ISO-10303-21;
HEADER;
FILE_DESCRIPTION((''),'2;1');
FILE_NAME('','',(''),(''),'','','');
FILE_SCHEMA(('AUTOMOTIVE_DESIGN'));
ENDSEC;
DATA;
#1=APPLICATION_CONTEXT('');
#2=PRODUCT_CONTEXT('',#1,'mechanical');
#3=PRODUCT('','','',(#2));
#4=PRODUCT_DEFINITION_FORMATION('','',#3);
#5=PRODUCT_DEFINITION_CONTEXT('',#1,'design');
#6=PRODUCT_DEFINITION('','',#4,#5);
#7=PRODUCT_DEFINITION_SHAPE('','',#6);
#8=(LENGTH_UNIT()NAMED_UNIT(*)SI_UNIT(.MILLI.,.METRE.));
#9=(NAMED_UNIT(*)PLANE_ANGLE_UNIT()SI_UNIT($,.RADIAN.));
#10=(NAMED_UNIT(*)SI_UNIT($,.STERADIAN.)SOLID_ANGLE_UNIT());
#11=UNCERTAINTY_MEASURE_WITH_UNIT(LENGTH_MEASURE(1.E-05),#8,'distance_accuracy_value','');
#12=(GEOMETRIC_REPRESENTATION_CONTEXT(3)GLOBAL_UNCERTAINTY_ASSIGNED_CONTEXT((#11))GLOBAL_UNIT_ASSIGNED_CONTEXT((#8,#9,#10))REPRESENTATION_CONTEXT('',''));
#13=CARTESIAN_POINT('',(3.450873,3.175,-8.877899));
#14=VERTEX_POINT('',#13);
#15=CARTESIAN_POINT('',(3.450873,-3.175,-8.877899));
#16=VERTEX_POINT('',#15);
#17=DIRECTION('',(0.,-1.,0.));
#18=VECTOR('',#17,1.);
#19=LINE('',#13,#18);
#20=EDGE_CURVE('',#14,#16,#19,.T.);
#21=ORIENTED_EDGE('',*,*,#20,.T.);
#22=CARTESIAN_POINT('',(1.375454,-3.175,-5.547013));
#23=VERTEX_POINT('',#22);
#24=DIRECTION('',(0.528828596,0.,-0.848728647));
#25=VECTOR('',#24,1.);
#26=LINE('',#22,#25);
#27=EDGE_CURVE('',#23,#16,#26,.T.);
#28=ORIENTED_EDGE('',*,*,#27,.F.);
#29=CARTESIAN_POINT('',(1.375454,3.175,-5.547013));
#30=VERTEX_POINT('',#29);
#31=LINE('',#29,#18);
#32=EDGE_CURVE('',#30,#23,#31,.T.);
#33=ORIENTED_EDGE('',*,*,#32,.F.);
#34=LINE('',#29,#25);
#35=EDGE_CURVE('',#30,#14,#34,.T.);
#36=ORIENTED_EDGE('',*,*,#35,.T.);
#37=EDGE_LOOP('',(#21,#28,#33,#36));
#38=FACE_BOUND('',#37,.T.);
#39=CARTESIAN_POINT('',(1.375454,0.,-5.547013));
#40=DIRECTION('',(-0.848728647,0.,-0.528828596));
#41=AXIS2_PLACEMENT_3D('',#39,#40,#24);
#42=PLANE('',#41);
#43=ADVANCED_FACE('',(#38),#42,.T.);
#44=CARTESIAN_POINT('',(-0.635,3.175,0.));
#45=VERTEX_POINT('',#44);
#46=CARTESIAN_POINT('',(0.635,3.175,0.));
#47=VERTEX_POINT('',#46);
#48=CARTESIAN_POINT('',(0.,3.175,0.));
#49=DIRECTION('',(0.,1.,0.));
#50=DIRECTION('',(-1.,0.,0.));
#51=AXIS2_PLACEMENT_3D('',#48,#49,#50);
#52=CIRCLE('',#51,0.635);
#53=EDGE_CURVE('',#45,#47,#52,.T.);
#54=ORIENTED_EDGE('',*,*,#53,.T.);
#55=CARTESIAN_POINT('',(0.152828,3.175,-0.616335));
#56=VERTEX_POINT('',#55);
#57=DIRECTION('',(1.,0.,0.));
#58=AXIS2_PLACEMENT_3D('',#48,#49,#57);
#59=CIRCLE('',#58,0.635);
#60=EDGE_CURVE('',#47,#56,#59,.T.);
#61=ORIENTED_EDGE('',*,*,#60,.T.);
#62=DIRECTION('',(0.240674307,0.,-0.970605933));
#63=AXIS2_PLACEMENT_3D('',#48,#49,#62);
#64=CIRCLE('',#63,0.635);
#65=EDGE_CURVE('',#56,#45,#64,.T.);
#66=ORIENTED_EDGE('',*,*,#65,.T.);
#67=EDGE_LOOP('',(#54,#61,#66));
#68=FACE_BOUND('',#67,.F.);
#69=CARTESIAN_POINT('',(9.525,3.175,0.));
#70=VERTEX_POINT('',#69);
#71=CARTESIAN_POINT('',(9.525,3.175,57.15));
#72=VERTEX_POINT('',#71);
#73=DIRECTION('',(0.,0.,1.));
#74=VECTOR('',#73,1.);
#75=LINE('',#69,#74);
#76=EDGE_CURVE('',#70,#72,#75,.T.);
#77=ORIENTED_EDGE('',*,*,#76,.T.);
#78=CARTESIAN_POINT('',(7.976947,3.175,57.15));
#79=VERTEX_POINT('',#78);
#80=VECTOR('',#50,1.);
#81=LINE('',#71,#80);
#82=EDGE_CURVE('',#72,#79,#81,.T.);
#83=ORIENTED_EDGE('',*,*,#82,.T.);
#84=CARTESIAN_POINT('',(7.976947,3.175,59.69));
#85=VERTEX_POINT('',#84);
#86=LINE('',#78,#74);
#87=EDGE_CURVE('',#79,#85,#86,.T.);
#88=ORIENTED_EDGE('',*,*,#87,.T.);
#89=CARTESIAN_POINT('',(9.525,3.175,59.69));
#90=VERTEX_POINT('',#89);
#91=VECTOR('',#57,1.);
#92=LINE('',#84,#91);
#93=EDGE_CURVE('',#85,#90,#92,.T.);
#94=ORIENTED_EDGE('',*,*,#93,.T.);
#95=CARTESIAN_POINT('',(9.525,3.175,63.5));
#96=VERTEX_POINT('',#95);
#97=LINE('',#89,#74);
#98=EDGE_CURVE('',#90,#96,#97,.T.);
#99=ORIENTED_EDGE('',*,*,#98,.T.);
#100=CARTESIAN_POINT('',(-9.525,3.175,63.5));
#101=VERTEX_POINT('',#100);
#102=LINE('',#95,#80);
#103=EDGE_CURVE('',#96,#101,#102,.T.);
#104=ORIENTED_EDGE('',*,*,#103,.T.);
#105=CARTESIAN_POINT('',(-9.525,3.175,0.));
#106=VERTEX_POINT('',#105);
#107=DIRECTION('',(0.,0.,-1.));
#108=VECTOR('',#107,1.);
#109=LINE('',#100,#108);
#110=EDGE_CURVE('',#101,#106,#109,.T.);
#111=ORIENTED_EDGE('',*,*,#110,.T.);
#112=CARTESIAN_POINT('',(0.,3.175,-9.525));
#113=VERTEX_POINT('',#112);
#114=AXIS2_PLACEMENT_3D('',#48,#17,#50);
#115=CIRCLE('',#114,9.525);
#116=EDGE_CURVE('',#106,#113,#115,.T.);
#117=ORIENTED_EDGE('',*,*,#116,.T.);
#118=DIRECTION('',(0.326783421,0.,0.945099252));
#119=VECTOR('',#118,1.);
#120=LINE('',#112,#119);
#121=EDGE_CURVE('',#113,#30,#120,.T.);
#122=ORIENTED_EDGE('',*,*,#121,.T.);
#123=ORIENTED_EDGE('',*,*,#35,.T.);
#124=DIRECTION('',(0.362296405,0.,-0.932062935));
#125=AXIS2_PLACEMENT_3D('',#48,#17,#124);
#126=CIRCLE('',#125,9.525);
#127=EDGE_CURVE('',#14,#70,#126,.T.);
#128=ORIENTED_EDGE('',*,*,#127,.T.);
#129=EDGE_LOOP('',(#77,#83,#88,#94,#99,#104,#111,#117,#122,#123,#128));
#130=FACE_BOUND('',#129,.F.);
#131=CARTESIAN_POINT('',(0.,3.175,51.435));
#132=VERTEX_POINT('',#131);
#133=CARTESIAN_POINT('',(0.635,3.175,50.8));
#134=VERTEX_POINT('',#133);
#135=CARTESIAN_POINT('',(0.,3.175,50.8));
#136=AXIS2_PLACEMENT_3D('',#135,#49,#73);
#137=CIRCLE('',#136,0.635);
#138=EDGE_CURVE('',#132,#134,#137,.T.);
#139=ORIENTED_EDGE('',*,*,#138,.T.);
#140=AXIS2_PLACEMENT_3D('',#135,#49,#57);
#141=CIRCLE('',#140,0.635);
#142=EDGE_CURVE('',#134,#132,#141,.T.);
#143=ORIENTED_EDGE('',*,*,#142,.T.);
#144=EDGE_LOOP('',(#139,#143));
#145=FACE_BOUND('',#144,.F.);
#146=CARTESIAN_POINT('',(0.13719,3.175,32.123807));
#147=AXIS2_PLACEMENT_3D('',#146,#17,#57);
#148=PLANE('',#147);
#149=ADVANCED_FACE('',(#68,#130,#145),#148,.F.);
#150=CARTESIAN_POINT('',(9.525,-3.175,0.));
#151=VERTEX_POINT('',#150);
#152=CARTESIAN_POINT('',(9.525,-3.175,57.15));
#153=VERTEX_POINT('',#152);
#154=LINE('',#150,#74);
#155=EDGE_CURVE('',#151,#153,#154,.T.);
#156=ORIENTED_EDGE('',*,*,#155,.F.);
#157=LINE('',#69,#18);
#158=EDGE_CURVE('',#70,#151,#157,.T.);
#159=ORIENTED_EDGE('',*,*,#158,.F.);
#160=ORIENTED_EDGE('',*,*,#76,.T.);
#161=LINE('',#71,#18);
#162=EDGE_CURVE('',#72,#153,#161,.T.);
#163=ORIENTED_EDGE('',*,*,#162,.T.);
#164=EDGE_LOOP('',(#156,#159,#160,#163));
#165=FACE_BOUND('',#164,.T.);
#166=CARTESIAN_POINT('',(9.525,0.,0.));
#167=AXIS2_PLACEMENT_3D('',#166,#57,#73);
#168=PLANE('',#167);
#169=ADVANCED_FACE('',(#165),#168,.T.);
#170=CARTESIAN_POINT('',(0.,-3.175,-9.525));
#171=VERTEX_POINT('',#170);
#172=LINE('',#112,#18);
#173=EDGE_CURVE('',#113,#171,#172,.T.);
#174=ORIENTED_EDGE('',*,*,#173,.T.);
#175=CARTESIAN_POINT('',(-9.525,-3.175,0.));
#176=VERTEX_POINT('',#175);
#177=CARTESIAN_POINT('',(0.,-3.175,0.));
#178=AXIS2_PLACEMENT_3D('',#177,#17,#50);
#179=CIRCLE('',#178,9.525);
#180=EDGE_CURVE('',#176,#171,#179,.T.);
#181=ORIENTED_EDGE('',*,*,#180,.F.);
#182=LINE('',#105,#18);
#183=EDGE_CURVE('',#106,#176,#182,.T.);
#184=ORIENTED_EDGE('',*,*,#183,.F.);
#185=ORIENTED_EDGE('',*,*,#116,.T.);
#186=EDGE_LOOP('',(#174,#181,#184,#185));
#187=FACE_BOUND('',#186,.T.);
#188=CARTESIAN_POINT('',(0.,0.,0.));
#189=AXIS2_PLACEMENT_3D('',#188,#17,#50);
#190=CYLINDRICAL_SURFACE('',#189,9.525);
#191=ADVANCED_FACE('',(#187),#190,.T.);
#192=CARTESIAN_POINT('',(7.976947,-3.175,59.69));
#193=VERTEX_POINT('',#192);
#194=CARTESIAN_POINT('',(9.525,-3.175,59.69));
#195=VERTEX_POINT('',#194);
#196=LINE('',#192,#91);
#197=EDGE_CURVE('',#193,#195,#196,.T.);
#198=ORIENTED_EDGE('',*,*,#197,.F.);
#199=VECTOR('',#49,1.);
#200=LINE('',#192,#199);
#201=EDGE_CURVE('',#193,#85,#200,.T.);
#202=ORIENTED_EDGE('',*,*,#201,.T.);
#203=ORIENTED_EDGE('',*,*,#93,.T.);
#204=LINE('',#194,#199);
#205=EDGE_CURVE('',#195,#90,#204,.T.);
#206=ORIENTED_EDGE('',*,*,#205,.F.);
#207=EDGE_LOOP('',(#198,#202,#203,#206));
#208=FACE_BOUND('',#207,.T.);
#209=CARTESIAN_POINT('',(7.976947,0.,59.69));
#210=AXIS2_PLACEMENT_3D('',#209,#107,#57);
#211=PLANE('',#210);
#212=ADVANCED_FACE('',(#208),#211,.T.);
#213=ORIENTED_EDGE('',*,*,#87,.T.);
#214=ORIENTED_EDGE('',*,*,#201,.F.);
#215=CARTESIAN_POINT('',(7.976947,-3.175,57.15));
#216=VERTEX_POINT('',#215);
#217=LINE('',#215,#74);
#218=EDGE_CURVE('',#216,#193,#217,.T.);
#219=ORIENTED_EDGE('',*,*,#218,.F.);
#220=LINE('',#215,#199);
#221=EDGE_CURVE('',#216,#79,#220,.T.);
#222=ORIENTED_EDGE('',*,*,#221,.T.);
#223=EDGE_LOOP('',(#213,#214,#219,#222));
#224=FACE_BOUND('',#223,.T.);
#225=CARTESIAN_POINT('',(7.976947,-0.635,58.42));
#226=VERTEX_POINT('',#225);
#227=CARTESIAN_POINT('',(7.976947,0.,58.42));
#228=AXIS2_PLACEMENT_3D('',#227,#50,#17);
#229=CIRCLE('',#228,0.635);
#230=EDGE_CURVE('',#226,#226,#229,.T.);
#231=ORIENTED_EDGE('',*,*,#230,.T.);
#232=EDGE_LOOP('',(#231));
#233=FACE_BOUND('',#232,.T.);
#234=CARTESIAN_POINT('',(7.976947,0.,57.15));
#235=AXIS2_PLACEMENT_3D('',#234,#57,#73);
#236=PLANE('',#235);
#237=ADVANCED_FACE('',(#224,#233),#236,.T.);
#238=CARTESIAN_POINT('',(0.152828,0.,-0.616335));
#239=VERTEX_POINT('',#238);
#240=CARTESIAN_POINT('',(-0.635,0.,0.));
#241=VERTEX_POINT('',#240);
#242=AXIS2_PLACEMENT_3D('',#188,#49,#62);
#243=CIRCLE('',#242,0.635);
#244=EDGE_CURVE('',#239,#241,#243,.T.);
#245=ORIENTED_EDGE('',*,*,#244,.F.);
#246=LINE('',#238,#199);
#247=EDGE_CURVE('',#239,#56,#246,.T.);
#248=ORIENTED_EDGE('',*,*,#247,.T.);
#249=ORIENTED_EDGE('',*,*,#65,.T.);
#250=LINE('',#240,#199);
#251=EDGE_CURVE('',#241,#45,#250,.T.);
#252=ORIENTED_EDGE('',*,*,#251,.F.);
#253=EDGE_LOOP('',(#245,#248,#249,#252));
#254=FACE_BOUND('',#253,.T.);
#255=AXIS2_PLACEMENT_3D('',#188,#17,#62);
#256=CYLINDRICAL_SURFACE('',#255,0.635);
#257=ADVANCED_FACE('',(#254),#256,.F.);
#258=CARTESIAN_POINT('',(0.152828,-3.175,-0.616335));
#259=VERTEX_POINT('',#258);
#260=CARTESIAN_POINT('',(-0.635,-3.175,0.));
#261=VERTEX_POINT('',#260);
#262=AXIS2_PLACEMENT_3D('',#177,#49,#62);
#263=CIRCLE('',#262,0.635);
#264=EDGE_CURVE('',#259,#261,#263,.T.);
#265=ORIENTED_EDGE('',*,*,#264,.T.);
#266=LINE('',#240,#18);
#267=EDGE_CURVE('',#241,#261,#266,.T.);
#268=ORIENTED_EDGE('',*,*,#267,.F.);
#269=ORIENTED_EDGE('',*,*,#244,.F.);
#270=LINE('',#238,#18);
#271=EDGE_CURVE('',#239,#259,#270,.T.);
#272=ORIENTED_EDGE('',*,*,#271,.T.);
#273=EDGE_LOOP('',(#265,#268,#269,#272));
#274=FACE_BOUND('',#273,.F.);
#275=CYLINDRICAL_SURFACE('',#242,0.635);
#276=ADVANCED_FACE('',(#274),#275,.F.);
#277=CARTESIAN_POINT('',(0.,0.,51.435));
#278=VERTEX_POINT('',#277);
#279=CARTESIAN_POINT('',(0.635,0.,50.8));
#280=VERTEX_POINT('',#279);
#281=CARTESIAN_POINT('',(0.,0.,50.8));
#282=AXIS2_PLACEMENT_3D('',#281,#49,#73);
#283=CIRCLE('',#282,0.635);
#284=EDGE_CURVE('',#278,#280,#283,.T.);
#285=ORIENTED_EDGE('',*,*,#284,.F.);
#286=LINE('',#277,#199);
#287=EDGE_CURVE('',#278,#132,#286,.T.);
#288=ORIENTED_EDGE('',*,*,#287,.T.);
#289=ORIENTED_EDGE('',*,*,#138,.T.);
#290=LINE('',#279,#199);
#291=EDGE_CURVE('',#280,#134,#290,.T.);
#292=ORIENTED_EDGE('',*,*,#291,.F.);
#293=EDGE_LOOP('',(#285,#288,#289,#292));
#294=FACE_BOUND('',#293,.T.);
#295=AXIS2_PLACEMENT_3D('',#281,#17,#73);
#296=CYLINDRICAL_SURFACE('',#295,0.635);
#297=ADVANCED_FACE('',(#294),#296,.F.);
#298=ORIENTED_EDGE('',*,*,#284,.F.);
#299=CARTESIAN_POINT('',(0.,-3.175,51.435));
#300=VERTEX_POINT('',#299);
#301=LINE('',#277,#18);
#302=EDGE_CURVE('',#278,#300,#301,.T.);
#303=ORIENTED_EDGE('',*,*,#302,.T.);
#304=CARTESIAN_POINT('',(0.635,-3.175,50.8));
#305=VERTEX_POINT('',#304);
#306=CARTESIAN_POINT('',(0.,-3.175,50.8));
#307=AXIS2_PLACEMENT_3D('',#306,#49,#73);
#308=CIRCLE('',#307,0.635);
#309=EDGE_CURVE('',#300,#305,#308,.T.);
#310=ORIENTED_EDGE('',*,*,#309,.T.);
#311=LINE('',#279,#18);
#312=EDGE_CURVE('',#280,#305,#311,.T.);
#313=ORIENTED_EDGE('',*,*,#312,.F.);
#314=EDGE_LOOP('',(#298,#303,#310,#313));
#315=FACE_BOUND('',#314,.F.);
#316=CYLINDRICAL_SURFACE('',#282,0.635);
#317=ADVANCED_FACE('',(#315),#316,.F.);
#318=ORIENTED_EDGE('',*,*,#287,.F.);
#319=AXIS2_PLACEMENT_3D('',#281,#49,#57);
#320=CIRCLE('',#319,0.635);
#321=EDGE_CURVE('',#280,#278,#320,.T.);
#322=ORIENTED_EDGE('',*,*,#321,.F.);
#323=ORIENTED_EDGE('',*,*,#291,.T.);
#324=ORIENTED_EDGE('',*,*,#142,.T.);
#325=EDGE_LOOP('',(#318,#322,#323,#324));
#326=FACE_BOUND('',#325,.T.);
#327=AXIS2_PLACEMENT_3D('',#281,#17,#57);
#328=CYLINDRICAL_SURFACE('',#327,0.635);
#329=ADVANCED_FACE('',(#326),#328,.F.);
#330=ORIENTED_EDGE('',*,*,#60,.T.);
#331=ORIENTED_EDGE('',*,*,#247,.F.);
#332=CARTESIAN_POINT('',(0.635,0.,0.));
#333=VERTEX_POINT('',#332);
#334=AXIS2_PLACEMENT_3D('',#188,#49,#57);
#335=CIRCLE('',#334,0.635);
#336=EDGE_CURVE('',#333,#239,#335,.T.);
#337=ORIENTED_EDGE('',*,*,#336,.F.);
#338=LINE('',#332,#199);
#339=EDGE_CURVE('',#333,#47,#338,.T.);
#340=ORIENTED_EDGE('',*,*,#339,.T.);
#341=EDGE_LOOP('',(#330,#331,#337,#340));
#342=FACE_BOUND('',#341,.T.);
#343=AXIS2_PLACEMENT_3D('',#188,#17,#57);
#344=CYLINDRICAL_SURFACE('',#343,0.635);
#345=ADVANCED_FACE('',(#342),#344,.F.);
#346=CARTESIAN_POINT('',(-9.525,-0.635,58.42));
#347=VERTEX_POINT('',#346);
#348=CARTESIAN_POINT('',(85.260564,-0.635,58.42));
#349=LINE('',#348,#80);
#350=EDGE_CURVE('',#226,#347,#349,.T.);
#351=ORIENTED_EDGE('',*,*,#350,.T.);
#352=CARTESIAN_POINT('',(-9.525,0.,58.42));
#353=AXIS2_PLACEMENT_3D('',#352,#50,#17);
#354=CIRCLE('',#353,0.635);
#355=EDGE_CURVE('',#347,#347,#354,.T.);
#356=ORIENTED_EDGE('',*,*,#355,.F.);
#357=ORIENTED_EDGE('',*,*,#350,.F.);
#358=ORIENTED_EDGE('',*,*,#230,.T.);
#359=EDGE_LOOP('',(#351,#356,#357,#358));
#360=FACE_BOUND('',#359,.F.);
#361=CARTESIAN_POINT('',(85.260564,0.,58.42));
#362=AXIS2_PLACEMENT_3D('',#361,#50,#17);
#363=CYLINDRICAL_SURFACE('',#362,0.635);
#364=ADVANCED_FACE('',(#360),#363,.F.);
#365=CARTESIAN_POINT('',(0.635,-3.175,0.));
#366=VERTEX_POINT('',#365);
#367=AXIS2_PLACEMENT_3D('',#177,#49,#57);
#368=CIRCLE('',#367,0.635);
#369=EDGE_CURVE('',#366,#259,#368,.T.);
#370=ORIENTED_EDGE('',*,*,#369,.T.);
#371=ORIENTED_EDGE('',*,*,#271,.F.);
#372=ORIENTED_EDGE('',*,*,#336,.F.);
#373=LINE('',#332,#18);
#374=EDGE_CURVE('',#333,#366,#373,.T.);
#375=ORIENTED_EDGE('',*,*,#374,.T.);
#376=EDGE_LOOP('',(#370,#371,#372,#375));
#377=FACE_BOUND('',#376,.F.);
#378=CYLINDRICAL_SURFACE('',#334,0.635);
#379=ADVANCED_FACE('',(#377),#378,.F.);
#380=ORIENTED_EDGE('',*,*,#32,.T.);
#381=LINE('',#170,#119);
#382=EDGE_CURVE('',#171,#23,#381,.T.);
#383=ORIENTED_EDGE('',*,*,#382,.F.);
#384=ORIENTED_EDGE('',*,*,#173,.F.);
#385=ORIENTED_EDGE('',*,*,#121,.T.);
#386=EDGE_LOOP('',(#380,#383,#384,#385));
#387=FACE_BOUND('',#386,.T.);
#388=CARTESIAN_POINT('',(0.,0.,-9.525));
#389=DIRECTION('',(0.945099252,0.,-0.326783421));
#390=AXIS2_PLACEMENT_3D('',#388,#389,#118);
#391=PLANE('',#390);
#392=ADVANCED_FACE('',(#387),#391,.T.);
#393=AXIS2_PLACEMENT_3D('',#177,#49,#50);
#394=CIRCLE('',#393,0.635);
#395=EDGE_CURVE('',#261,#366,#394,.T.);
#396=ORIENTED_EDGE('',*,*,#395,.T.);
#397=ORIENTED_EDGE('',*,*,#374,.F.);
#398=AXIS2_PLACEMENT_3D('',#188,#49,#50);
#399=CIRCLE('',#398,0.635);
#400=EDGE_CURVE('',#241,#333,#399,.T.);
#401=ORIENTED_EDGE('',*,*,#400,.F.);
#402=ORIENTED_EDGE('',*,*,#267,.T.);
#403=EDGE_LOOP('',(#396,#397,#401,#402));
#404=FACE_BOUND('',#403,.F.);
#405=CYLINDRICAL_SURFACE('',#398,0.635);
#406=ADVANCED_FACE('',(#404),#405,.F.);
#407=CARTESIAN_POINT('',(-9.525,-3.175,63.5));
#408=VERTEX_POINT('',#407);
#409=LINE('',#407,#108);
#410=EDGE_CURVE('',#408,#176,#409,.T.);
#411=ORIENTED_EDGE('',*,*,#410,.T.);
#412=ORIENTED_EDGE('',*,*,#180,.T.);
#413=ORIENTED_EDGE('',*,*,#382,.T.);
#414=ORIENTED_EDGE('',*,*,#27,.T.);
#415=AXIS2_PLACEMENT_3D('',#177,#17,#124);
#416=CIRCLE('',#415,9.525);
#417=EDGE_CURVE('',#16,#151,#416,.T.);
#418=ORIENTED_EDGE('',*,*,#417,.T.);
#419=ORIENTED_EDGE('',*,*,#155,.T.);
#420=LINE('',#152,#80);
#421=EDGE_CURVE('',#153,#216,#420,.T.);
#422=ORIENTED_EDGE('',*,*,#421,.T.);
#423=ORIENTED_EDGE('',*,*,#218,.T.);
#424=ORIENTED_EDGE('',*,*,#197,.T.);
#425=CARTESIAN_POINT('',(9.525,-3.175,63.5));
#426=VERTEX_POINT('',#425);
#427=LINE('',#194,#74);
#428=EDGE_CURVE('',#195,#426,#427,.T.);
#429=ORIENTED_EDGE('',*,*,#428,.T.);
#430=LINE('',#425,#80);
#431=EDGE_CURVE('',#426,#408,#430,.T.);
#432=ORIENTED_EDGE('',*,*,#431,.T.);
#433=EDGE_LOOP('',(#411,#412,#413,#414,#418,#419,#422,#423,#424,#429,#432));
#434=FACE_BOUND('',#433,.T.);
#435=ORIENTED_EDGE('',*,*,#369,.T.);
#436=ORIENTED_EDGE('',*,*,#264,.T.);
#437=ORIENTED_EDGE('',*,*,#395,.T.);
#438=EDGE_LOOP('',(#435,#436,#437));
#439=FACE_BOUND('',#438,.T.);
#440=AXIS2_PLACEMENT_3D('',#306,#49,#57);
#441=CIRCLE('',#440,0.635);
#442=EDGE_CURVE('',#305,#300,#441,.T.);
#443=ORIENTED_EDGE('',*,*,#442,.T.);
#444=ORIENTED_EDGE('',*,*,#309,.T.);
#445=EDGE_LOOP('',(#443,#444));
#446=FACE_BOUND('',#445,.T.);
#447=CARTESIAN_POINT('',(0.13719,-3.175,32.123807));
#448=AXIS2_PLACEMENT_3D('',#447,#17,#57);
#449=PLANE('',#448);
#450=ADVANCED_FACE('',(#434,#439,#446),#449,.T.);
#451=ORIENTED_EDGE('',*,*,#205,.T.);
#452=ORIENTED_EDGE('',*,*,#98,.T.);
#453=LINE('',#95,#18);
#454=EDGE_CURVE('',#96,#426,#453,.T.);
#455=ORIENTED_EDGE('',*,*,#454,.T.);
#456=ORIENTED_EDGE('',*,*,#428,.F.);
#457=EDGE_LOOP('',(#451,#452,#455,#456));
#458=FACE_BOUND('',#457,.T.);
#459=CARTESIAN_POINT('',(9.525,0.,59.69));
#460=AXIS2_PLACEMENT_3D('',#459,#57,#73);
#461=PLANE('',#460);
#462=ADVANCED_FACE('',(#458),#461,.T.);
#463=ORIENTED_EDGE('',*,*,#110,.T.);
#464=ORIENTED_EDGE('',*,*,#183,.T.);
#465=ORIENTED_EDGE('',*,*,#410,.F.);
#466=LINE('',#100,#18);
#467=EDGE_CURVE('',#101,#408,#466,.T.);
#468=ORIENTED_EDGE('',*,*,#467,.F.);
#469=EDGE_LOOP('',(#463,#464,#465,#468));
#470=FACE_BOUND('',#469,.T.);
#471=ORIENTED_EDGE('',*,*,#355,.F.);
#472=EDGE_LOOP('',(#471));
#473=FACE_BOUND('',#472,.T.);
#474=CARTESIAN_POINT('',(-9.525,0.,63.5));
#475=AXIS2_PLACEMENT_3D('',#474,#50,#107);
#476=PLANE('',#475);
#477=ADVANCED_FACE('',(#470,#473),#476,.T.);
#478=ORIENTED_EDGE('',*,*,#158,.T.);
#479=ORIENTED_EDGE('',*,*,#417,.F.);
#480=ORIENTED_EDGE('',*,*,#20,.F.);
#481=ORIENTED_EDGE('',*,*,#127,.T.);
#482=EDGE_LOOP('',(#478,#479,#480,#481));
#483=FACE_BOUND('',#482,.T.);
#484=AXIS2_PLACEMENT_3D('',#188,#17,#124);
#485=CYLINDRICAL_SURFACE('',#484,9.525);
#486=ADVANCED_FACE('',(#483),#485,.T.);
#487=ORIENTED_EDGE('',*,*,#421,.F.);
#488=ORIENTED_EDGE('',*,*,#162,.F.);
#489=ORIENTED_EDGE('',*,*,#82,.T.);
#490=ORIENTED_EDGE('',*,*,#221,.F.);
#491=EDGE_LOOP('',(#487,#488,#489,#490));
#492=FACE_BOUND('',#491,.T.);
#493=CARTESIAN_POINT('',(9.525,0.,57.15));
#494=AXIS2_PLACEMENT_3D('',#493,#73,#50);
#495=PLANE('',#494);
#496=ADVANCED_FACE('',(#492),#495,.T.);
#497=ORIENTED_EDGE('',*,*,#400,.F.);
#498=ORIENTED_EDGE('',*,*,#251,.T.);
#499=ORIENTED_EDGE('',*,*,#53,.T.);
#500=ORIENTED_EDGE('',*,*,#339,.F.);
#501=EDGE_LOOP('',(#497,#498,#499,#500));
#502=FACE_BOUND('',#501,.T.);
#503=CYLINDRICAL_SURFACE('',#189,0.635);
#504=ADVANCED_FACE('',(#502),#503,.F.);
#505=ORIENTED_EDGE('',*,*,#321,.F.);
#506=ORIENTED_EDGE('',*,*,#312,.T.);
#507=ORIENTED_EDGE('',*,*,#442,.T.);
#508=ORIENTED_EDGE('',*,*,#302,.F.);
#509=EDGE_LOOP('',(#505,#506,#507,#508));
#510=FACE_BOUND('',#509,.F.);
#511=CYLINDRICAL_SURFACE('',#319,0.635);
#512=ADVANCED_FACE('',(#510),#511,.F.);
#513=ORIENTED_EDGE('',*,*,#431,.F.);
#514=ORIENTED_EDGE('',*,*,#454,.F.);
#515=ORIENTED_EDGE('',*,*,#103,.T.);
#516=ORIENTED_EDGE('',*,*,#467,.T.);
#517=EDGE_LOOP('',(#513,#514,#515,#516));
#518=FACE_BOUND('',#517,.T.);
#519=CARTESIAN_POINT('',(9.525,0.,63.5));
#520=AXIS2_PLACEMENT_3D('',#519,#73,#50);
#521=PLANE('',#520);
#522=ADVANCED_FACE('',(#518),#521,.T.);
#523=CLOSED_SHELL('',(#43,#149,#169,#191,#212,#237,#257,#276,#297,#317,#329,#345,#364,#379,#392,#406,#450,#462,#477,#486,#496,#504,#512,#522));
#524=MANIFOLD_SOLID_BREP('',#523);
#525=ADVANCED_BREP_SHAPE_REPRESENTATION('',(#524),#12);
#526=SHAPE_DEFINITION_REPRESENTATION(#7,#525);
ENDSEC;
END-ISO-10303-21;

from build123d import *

# Parameters (mm, degrees)
F1_DEPTH = 3.175
F3_D     = 1.27


# Not quite as in the source:
# - a feature names something its author has since deleted; it is built from what else it names


with BuildPart() as f1:
    # F0 (on Front) → F1 (new body, symmetric)
    with BuildSketch(Plane.XZ):
        with BuildLine():
            Line((9.525, 59.69), (9.525, 63.5))
            Line((9.525, 63.5), (0, 63.5))
            Line((0, 63.5), (-9.525, 63.5))
            Line((-9.525, 63.5), (-9.525, 0))
            Line((-9.525, 0), (-0.635, 0))
            ThreePointArc((-0.635, 0), (0, 0.635), (0.635, 0))
            Line((0.635, 0), (9.525, 0))
            Line((9.525, 0), (9.525, 57.15))
            Line((9.525, 57.15), (7.9769473523, 57.15))
            Line((7.9769473523, 57.15), (7.9769473523, 59.69))
            Line((7.9769473523, 59.69), (9.525, 59.69))
        make_face()
        with BuildLine():
            ThreePointArc((0.635, 50.8), (-0.4490128061, 50.3509871939), (0, 51.435))
            ThreePointArc((0, 51.435), (0.4490128061, 51.2490128061), (0.635, 50.8))
        make_face(mode=Mode.SUBTRACT)
        with BuildLine():
            ThreePointArc((3.450873254, -8.8778994579), (7.861144724, -5.3784782818), (9.525, 0))
            Line((9.525, 0), (0.635, 0))
            ThreePointArc((0.635, 0), (0.5001354304, -0.3912665987), (0.1528281851, -0.6163347677))
            Line((0.1528281851, -0.6163347677), (1.3754536657, -5.5470129091))
            Line((1.3754536657, -5.5470129091), (3.450873254, -8.8778994579))
        make_face()
        with BuildLine():
            Line((-0.635, 0), (-9.525, 0))
            ThreePointArc((-9.525, 0), (-6.7351920908, -6.7351920908), (0, -9.525))
            Line((0, -9.525), (1.3754536657, -5.5470129091))
            Line((1.3754536657, -5.5470129091), (0.1528281851, -0.6163347677))
            ThreePointArc((0.1528281851, -0.6163347677), (-0.3912665987, -0.5001354304), (-0.635, 0))
        make_face()
    extrude(amount=F1_DEPTH, both=True)

    # F3 (through all)
    with Locations(Plane.YZ.offset(9.525)):
        with Locations((0, 58.42)):
            Hole(F3_D / 2)


solid = f1.part
